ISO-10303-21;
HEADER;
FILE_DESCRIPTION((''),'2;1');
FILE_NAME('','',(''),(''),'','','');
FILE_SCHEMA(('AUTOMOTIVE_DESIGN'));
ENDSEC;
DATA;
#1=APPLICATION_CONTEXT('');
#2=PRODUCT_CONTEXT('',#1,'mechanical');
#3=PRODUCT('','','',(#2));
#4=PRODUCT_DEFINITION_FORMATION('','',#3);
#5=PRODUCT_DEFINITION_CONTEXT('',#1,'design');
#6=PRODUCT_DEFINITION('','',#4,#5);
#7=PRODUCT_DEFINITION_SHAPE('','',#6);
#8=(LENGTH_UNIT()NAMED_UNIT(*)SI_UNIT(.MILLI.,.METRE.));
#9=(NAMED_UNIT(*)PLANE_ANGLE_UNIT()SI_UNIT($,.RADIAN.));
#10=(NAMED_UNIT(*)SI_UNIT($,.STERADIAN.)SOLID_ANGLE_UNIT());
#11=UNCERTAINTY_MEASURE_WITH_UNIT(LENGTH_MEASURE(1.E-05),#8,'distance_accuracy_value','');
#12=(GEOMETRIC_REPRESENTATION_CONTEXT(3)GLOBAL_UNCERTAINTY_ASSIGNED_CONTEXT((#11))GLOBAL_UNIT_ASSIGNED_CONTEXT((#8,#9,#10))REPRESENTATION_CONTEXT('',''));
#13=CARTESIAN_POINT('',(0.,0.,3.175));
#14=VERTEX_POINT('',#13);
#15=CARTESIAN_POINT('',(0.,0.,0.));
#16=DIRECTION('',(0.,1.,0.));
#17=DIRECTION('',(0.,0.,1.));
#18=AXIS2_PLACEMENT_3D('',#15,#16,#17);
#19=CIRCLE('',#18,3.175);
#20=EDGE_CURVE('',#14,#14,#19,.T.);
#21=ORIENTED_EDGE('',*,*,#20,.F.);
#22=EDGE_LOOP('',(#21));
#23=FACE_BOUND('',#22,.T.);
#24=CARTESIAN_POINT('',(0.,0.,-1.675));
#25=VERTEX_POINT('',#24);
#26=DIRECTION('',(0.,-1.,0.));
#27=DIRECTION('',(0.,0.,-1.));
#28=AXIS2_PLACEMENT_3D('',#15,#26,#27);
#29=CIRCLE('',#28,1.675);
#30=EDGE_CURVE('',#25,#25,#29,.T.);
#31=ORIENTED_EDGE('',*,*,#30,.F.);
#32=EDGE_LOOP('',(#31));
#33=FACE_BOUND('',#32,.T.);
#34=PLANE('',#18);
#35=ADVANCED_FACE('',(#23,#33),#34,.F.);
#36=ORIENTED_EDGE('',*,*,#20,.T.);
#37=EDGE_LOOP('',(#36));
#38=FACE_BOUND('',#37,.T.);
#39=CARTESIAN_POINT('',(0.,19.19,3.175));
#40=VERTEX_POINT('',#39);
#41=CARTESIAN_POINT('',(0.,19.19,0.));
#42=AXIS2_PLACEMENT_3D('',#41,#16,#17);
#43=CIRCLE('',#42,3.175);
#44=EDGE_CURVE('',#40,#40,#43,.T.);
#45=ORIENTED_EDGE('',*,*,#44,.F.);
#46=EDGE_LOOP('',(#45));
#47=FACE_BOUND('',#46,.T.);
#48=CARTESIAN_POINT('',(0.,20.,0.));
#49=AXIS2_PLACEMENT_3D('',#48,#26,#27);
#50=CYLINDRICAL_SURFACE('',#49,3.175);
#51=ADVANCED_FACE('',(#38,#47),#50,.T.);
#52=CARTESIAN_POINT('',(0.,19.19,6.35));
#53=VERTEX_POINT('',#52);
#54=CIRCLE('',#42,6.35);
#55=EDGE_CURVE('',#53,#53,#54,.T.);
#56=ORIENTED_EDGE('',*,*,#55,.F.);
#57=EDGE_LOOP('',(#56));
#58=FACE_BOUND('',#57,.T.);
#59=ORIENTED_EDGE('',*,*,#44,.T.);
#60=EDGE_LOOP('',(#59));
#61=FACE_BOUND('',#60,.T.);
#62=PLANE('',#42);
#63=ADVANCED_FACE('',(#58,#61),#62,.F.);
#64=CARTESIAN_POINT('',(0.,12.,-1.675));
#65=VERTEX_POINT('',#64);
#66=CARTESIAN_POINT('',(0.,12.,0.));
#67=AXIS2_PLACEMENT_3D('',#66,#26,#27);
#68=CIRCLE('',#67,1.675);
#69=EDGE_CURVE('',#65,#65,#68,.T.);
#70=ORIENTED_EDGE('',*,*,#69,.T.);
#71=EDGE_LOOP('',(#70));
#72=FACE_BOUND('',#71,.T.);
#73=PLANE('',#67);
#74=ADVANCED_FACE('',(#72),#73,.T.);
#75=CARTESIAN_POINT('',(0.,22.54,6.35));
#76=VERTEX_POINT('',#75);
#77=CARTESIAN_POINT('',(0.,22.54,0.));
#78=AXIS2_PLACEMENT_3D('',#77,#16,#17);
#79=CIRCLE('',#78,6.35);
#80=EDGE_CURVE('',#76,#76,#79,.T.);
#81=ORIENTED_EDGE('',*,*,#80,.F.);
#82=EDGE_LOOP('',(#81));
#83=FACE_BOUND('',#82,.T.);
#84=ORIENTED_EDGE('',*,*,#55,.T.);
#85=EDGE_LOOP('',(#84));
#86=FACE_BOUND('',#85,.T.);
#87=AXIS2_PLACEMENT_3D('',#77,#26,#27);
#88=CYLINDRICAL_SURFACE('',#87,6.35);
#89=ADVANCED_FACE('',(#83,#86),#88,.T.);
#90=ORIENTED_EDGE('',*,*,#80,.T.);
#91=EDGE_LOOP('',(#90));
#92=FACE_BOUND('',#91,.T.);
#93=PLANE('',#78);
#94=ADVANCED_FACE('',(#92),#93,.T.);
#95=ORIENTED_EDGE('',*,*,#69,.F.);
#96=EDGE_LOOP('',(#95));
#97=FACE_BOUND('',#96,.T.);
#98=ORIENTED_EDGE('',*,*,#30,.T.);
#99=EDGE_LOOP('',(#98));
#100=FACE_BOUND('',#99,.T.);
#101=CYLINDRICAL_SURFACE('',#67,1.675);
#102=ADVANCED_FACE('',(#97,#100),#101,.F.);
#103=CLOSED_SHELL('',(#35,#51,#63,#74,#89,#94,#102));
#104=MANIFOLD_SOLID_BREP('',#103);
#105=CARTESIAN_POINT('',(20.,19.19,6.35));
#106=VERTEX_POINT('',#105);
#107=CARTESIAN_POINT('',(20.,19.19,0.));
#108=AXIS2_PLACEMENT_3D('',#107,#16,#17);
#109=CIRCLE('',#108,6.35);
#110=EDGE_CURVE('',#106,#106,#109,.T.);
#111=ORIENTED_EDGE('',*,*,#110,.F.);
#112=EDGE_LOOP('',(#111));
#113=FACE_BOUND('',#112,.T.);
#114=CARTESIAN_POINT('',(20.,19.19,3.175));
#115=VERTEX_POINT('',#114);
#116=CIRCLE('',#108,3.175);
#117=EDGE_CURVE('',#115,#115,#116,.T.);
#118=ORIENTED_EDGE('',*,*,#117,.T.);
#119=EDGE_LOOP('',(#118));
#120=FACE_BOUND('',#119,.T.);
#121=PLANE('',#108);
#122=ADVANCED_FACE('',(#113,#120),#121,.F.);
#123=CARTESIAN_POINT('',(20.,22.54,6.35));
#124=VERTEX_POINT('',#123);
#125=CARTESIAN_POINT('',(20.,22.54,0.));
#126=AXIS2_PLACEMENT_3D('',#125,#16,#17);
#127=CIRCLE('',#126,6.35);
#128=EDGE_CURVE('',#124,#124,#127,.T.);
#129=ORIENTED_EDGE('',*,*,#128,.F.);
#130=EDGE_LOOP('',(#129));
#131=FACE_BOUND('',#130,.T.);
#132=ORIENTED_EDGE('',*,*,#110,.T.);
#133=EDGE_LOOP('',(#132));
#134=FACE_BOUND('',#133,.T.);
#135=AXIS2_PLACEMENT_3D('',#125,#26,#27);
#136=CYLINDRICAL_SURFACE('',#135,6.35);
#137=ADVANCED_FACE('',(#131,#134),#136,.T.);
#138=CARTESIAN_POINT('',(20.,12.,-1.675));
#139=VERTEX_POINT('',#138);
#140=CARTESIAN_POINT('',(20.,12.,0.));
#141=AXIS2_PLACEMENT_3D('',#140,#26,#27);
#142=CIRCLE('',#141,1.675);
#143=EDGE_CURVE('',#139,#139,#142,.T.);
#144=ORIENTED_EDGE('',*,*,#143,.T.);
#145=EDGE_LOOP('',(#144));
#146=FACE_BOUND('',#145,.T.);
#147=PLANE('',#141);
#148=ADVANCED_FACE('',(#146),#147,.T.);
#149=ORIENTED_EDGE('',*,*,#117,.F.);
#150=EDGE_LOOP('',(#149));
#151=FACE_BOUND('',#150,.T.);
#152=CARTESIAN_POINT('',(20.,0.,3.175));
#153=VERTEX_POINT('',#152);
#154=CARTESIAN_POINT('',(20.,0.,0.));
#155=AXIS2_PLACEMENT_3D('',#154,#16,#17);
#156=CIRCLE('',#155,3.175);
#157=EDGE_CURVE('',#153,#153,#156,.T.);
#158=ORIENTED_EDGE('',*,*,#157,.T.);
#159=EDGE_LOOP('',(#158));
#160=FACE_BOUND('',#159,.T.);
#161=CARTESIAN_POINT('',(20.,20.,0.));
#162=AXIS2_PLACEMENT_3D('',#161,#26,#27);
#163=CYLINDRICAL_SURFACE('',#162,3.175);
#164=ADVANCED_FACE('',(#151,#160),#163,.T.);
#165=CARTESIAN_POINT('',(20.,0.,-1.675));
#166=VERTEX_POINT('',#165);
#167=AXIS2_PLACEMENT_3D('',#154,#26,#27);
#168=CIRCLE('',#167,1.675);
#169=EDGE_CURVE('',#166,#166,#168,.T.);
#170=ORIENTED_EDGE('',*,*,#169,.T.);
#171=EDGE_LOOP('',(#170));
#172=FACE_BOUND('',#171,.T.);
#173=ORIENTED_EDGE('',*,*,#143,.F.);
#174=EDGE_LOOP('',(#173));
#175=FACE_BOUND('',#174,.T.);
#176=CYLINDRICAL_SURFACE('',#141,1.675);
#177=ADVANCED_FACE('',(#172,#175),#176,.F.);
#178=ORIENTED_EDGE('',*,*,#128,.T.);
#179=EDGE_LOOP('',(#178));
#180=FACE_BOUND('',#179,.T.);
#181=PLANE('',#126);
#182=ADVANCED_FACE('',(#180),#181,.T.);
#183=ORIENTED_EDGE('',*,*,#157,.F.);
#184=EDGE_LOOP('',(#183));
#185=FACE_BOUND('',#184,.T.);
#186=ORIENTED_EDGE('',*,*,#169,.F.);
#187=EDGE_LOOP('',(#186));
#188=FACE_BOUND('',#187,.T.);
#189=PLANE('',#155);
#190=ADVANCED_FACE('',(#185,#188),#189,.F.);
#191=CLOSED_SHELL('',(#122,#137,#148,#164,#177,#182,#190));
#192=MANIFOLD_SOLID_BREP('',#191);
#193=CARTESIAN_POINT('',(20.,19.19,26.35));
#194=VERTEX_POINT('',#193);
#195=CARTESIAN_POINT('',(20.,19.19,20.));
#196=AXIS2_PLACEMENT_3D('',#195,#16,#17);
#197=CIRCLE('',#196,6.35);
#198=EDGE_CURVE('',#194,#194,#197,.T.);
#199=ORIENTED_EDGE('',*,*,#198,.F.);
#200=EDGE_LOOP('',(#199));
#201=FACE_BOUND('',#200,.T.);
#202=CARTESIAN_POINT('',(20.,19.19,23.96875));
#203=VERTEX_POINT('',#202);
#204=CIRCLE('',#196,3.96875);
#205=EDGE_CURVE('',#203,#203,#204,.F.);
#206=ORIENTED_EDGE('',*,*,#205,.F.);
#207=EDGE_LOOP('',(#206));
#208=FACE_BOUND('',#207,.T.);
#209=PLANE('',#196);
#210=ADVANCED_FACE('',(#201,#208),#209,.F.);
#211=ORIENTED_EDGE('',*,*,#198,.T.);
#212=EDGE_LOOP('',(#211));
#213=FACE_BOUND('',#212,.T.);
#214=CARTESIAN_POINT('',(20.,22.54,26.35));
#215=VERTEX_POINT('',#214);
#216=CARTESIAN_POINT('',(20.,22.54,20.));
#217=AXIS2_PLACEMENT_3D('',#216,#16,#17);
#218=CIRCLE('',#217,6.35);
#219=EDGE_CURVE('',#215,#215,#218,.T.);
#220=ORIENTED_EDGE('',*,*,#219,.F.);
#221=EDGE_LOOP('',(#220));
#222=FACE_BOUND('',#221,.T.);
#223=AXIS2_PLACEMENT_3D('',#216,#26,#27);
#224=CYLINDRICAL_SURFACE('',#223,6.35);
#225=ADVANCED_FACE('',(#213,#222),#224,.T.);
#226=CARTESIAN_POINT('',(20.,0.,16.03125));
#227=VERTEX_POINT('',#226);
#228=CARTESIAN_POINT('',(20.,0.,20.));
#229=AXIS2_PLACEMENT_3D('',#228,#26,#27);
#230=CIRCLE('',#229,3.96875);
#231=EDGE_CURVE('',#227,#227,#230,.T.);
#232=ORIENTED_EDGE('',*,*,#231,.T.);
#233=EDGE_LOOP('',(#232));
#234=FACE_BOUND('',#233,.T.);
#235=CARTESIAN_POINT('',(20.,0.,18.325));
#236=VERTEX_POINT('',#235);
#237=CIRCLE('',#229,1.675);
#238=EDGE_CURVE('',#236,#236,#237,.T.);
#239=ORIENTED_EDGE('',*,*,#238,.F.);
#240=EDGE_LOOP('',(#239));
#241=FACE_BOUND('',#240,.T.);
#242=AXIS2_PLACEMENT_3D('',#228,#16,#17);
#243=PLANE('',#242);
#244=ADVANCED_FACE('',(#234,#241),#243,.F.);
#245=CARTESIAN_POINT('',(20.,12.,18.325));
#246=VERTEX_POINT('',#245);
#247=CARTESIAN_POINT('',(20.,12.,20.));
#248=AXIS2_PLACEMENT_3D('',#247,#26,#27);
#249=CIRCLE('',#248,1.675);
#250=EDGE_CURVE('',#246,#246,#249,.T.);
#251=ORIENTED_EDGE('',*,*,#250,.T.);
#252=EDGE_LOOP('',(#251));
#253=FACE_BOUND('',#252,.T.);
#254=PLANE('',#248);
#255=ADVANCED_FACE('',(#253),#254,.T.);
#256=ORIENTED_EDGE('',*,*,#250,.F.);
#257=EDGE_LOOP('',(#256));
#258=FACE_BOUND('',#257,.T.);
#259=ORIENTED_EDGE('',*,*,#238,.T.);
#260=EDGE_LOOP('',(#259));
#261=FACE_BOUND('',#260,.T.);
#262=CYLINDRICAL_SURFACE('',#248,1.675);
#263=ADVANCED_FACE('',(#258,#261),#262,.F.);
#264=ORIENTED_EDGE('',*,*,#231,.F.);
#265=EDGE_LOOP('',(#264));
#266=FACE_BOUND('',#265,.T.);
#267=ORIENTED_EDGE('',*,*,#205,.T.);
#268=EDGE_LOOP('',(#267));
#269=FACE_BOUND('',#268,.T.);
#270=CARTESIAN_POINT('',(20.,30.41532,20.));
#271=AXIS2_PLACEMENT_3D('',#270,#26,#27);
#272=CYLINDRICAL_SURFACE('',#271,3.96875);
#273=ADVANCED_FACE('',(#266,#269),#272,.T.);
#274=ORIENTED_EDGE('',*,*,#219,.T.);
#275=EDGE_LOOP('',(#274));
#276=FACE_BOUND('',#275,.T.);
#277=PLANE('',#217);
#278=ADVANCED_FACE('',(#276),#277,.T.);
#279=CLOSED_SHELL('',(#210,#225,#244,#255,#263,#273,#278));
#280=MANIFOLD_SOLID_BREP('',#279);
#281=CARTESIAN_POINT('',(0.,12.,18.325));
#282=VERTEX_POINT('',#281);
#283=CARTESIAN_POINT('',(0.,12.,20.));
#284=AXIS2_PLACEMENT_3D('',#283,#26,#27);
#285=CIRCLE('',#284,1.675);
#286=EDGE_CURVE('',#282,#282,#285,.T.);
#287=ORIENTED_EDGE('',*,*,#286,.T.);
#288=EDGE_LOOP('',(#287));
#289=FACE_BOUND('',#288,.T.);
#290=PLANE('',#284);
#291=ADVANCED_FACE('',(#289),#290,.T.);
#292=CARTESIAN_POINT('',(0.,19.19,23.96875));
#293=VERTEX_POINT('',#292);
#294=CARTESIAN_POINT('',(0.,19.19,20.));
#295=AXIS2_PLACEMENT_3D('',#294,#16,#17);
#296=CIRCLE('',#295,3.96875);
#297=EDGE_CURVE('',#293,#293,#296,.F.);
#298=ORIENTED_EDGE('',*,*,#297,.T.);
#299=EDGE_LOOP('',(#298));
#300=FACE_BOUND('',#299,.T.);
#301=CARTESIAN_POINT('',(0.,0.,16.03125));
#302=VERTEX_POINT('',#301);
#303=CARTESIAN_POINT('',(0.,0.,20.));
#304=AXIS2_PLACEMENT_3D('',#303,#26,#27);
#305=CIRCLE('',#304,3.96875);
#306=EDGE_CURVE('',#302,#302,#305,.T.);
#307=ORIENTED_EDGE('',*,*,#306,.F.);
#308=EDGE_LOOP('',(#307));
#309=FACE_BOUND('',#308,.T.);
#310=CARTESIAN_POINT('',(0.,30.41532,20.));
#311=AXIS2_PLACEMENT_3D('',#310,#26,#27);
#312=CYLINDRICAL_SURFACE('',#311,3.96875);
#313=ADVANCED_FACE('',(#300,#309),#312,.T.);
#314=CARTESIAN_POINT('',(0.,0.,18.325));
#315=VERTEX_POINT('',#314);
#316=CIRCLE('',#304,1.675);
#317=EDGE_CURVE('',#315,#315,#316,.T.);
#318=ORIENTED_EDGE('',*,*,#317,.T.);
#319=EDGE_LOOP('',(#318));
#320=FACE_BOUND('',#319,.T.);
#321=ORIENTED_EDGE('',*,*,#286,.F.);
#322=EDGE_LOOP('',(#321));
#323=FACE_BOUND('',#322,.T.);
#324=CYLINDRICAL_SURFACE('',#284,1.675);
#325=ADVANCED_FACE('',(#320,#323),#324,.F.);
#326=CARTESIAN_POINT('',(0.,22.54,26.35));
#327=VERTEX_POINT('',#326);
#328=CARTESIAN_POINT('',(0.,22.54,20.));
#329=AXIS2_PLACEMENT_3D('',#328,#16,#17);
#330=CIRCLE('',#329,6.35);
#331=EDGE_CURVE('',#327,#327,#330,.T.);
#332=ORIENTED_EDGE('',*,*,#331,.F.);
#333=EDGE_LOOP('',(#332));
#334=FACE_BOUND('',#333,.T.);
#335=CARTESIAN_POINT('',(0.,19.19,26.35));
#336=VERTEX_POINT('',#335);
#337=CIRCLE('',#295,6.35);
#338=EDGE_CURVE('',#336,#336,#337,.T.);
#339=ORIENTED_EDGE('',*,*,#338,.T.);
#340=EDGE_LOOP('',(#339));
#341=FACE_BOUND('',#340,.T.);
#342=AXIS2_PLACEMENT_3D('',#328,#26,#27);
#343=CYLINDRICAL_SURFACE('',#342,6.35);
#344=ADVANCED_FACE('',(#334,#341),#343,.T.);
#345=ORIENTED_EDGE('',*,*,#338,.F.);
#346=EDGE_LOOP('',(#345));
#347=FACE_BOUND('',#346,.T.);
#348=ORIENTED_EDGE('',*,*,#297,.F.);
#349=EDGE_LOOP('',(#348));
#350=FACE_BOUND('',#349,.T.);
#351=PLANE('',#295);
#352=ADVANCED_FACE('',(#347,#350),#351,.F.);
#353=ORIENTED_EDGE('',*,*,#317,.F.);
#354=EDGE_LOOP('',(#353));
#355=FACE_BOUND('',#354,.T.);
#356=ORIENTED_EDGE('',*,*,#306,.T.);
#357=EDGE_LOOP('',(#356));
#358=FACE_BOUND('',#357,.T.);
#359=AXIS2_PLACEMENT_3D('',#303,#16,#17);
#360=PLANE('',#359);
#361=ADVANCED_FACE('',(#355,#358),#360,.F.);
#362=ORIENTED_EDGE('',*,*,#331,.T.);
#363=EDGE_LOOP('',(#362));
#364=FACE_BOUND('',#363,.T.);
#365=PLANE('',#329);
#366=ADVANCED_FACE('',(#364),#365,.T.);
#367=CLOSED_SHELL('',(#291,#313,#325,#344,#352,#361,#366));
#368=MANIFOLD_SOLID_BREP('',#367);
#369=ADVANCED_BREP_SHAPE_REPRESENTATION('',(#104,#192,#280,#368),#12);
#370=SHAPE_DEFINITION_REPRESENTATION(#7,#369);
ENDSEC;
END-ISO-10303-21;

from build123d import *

# Parameters (mm, degrees)
SKETCH1_R                     = 3.175
BOSS_EXTRUDE1_DEPTH           = 20
SKETCH2_R                     = 1.675
CUT_EXTRUDE1_DEPTH            = 12
SKETCH4_R                     = 6.35
BOSS_EXTRUDE2_DEPTH           = 2.54
BOSS_EXTRUDE3_START           = -3.35
SKETCH6_R                     = 6.35
BOSS_EXTRUDE3_DEPTH           = 3.35
BODY_MOVE_COPY2_OUTLINE_R     = 3.175
BODY_MOVE_COPY2_OUTLINE_R_2   = 1.675
BODY_MOVE_COPY2_DEPTH         = 22.54
BODY_MOVE_COPY2_START         = 19.19
BODY_MOVE_COPY2_2_OUTLINE_R   = 6.35
BODY_MOVE_COPY2_2_OUTLINE_R_2 = 3.175
BODY_MOVE_COPY2_2_OUTLINE_R_3 = 1.675
BODY_MOVE_COPY2_2_DEPTH       = 3.35
BODY_MOVE_COPY2_START_2       = 12
BODY_MOVE_COPY2_3_OUTLINE_R   = 1.675
BODY_MOVE_COPY2_3_DEPTH       = 7.19
BOSS_EXTRUDE4_REACH           = 45.551
SKETCH8_R                     = 3.96875
SKETCH8_R_2                   = 1.675


# Read off the part's stored shape, not the designer's step: Body-Move/Copy2
with BuildPart() as part:
    # Sketch1 → Boss-Extrude1 (new body)
    with BuildSketch(Plane(origin=(0, 0, 0), x_dir=(1, 0, 0), z_dir=(0, 1, 0))):
        with Locations(Location((0, 0, 0), (0, 0, 270))):
            Circle(SKETCH1_R)
    extrude(amount=BOSS_EXTRUDE1_DEPTH)

    # Sketch2 → Cut-Extrude1 (cut)
    with BuildSketch(Plane.XZ):
        with Locations(Location((0, 0, 0), (0, 0, 270))):
            Circle(SKETCH2_R)
    extrude(amount=-CUT_EXTRUDE1_DEPTH, mode=Mode.SUBTRACT)

    # Sketch4 → Boss-Extrude2 (add)
    with BuildSketch(Plane(origin=(0, 20, 0), x_dir=(1, 0, 0), z_dir=(0, 1, 0))):
        with Locations(Location((0, 0, 0), (0, 0, 270))):
            Circle(SKETCH4_R)
    extrude(amount=BOSS_EXTRUDE2_DEPTH)

    # Sketch6 → Boss-Extrude3 (add)
    with BuildSketch(Plane(origin=(0, 22.54, 0), x_dir=(1, 0, 0), z_dir=(0, 1, 0)).offset(BOSS_EXTRUDE3_START)):
        with Locations(Location((0, 0, 0), (0, 0, 270))):
            Circle(SKETCH6_R)
    extrude(amount=BOSS_EXTRUDE3_DEPTH)


with BuildPart() as body_2:
    # Body-Move/Copy1: copy of part
    add(part.part.moved(Location((20, 0, 0))))


with BuildPart() as body_3:
    # Body-Move/Copy2 outline → Body-Move/Copy2 (new body)
    # profile 1 of 2: a face of its own
    with BuildSketch(Plane(origin=(0, 0, 0), x_dir=(1, 0, 0), z_dir=(0, 1, 0))):
        with Locations((20, -20)):
            Circle(BODY_MOVE_COPY2_OUTLINE_R)
        with Locations((20, -20)):
            Circle(BODY_MOVE_COPY2_OUTLINE_R_2, mode=Mode.SUBTRACT)
    # profile 2 of 2: a face of its own
    with BuildSketch(Plane(origin=(0, 0, 0), x_dir=(1, 0, 0), z_dir=(0, 1, 0))):
        with Locations((0, -20)):
            Circle(BODY_MOVE_COPY2_OUTLINE_R)
        with Locations((0, -20)):
            Circle(BODY_MOVE_COPY2_OUTLINE_R_2, mode=Mode.SUBTRACT)
    extrude(amount=BODY_MOVE_COPY2_DEPTH)



with BuildPart() as body_4:
    # Body-Move_Copy2 2 outline → Body-Move_Copy2 2 (new body)
    # profile 1 of 4: a face of its own
    with BuildSketch(Plane(origin=(0, 0, 0), x_dir=(1, 0, 0), z_dir=(0, 1, 0)).offset(BODY_MOVE_COPY2_START)):
        with Locations((20, -20)):
            Circle(BODY_MOVE_COPY2_2_OUTLINE_R)
        with Locations((20, -20)):
            Circle(BODY_MOVE_COPY2_2_OUTLINE_R_2, mode=Mode.SUBTRACT)
    # profile 2 of 4: a face of its own
    with BuildSketch(Plane(origin=(0, 0, 0), x_dir=(1, 0, 0), z_dir=(0, 1, 0)).offset(BODY_MOVE_COPY2_START)):
        with Locations((20, -20)):
            Circle(BODY_MOVE_COPY2_2_OUTLINE_R_3)
    # profile 3 of 4: a face of its own
    with BuildSketch(Plane(origin=(0, 0, 0), x_dir=(1, 0, 0), z_dir=(0, 1, 0)).offset(BODY_MOVE_COPY2_START)):
        with Locations((0, -20)):
            Circle(BODY_MOVE_COPY2_2_OUTLINE_R)
        with Locations((0, -20)):
            Circle(BODY_MOVE_COPY2_2_OUTLINE_R_2, mode=Mode.SUBTRACT)
    # profile 4 of 4: a face of its own
    with BuildSketch(Plane(origin=(0, 0, 0), x_dir=(1, 0, 0), z_dir=(0, 1, 0)).offset(BODY_MOVE_COPY2_START)):
        with Locations((0, -20)):
            Circle(BODY_MOVE_COPY2_2_OUTLINE_R_3)
    extrude(amount=BODY_MOVE_COPY2_2_DEPTH)


with BuildPart() as body_3_1:
    add(body_3.part)

    add(body_4.part)  # Body-Move_Copy2 3 merges body 4
    # Body-Move_Copy2 3 outline → Body-Move_Copy2 3 (add)
    with BuildSketch(Plane(origin=(0, 0, 0), x_dir=(1, 0, 0), z_dir=(0, 1, 0)).offset(BODY_MOVE_COPY2_START_2)):
        with Locations((20, -20)):
            Circle(BODY_MOVE_COPY2_3_OUTLINE_R)
        with Locations((0, -20)):
            Circle(BODY_MOVE_COPY2_3_OUTLINE_R)
    extrude(amount=BODY_MOVE_COPY2_3_DEPTH)

    # Sketch8 → Boss-Extrude4 (add, up to next)
    with BuildSketch(Plane.XZ, mode=Mode.PRIVATE) as boss_extrude4_sk1:
        with Locations(Location((0, 20, 0), (0, 0, 270))):
            Circle(SKETCH8_R)
        with Locations(Location((0, 20, 0), (0, 0, 270))):
            Circle(SKETCH8_R_2, mode=Mode.SUBTRACT)
    boss_extrude4_tool1 = extrude(boss_extrude4_sk1.sketch, amount=-BOSS_EXTRUDE4_REACH, mode=Mode.PRIVATE) - body_3_1.part
    # Sketch8 → Boss-Extrude4 (add, up to next)
    with BuildSketch(Plane.XZ, mode=Mode.PRIVATE) as boss_extrude4_sk2:
        with Locations(Location((20, 20, 0), (0, 0, 270))):
            Circle(SKETCH8_R)
        with Locations(Location((20, 20, 0), (0, 0, 270))):
            Circle(SKETCH8_R_2, mode=Mode.SUBTRACT)
    boss_extrude4_tool2 = extrude(boss_extrude4_sk2.sketch, amount=-BOSS_EXTRUDE4_REACH, mode=Mode.PRIVATE) - body_3_1.part
    add(boss_extrude4_tool1.solids().sort_by_distance((0, 0, 23.856497))[0])
    add(boss_extrude4_tool2.solids().sort_by_distance((20, 0, 23.856497))[0])


solid = Compound([part.part, body_2.part, body_3_1.part])
